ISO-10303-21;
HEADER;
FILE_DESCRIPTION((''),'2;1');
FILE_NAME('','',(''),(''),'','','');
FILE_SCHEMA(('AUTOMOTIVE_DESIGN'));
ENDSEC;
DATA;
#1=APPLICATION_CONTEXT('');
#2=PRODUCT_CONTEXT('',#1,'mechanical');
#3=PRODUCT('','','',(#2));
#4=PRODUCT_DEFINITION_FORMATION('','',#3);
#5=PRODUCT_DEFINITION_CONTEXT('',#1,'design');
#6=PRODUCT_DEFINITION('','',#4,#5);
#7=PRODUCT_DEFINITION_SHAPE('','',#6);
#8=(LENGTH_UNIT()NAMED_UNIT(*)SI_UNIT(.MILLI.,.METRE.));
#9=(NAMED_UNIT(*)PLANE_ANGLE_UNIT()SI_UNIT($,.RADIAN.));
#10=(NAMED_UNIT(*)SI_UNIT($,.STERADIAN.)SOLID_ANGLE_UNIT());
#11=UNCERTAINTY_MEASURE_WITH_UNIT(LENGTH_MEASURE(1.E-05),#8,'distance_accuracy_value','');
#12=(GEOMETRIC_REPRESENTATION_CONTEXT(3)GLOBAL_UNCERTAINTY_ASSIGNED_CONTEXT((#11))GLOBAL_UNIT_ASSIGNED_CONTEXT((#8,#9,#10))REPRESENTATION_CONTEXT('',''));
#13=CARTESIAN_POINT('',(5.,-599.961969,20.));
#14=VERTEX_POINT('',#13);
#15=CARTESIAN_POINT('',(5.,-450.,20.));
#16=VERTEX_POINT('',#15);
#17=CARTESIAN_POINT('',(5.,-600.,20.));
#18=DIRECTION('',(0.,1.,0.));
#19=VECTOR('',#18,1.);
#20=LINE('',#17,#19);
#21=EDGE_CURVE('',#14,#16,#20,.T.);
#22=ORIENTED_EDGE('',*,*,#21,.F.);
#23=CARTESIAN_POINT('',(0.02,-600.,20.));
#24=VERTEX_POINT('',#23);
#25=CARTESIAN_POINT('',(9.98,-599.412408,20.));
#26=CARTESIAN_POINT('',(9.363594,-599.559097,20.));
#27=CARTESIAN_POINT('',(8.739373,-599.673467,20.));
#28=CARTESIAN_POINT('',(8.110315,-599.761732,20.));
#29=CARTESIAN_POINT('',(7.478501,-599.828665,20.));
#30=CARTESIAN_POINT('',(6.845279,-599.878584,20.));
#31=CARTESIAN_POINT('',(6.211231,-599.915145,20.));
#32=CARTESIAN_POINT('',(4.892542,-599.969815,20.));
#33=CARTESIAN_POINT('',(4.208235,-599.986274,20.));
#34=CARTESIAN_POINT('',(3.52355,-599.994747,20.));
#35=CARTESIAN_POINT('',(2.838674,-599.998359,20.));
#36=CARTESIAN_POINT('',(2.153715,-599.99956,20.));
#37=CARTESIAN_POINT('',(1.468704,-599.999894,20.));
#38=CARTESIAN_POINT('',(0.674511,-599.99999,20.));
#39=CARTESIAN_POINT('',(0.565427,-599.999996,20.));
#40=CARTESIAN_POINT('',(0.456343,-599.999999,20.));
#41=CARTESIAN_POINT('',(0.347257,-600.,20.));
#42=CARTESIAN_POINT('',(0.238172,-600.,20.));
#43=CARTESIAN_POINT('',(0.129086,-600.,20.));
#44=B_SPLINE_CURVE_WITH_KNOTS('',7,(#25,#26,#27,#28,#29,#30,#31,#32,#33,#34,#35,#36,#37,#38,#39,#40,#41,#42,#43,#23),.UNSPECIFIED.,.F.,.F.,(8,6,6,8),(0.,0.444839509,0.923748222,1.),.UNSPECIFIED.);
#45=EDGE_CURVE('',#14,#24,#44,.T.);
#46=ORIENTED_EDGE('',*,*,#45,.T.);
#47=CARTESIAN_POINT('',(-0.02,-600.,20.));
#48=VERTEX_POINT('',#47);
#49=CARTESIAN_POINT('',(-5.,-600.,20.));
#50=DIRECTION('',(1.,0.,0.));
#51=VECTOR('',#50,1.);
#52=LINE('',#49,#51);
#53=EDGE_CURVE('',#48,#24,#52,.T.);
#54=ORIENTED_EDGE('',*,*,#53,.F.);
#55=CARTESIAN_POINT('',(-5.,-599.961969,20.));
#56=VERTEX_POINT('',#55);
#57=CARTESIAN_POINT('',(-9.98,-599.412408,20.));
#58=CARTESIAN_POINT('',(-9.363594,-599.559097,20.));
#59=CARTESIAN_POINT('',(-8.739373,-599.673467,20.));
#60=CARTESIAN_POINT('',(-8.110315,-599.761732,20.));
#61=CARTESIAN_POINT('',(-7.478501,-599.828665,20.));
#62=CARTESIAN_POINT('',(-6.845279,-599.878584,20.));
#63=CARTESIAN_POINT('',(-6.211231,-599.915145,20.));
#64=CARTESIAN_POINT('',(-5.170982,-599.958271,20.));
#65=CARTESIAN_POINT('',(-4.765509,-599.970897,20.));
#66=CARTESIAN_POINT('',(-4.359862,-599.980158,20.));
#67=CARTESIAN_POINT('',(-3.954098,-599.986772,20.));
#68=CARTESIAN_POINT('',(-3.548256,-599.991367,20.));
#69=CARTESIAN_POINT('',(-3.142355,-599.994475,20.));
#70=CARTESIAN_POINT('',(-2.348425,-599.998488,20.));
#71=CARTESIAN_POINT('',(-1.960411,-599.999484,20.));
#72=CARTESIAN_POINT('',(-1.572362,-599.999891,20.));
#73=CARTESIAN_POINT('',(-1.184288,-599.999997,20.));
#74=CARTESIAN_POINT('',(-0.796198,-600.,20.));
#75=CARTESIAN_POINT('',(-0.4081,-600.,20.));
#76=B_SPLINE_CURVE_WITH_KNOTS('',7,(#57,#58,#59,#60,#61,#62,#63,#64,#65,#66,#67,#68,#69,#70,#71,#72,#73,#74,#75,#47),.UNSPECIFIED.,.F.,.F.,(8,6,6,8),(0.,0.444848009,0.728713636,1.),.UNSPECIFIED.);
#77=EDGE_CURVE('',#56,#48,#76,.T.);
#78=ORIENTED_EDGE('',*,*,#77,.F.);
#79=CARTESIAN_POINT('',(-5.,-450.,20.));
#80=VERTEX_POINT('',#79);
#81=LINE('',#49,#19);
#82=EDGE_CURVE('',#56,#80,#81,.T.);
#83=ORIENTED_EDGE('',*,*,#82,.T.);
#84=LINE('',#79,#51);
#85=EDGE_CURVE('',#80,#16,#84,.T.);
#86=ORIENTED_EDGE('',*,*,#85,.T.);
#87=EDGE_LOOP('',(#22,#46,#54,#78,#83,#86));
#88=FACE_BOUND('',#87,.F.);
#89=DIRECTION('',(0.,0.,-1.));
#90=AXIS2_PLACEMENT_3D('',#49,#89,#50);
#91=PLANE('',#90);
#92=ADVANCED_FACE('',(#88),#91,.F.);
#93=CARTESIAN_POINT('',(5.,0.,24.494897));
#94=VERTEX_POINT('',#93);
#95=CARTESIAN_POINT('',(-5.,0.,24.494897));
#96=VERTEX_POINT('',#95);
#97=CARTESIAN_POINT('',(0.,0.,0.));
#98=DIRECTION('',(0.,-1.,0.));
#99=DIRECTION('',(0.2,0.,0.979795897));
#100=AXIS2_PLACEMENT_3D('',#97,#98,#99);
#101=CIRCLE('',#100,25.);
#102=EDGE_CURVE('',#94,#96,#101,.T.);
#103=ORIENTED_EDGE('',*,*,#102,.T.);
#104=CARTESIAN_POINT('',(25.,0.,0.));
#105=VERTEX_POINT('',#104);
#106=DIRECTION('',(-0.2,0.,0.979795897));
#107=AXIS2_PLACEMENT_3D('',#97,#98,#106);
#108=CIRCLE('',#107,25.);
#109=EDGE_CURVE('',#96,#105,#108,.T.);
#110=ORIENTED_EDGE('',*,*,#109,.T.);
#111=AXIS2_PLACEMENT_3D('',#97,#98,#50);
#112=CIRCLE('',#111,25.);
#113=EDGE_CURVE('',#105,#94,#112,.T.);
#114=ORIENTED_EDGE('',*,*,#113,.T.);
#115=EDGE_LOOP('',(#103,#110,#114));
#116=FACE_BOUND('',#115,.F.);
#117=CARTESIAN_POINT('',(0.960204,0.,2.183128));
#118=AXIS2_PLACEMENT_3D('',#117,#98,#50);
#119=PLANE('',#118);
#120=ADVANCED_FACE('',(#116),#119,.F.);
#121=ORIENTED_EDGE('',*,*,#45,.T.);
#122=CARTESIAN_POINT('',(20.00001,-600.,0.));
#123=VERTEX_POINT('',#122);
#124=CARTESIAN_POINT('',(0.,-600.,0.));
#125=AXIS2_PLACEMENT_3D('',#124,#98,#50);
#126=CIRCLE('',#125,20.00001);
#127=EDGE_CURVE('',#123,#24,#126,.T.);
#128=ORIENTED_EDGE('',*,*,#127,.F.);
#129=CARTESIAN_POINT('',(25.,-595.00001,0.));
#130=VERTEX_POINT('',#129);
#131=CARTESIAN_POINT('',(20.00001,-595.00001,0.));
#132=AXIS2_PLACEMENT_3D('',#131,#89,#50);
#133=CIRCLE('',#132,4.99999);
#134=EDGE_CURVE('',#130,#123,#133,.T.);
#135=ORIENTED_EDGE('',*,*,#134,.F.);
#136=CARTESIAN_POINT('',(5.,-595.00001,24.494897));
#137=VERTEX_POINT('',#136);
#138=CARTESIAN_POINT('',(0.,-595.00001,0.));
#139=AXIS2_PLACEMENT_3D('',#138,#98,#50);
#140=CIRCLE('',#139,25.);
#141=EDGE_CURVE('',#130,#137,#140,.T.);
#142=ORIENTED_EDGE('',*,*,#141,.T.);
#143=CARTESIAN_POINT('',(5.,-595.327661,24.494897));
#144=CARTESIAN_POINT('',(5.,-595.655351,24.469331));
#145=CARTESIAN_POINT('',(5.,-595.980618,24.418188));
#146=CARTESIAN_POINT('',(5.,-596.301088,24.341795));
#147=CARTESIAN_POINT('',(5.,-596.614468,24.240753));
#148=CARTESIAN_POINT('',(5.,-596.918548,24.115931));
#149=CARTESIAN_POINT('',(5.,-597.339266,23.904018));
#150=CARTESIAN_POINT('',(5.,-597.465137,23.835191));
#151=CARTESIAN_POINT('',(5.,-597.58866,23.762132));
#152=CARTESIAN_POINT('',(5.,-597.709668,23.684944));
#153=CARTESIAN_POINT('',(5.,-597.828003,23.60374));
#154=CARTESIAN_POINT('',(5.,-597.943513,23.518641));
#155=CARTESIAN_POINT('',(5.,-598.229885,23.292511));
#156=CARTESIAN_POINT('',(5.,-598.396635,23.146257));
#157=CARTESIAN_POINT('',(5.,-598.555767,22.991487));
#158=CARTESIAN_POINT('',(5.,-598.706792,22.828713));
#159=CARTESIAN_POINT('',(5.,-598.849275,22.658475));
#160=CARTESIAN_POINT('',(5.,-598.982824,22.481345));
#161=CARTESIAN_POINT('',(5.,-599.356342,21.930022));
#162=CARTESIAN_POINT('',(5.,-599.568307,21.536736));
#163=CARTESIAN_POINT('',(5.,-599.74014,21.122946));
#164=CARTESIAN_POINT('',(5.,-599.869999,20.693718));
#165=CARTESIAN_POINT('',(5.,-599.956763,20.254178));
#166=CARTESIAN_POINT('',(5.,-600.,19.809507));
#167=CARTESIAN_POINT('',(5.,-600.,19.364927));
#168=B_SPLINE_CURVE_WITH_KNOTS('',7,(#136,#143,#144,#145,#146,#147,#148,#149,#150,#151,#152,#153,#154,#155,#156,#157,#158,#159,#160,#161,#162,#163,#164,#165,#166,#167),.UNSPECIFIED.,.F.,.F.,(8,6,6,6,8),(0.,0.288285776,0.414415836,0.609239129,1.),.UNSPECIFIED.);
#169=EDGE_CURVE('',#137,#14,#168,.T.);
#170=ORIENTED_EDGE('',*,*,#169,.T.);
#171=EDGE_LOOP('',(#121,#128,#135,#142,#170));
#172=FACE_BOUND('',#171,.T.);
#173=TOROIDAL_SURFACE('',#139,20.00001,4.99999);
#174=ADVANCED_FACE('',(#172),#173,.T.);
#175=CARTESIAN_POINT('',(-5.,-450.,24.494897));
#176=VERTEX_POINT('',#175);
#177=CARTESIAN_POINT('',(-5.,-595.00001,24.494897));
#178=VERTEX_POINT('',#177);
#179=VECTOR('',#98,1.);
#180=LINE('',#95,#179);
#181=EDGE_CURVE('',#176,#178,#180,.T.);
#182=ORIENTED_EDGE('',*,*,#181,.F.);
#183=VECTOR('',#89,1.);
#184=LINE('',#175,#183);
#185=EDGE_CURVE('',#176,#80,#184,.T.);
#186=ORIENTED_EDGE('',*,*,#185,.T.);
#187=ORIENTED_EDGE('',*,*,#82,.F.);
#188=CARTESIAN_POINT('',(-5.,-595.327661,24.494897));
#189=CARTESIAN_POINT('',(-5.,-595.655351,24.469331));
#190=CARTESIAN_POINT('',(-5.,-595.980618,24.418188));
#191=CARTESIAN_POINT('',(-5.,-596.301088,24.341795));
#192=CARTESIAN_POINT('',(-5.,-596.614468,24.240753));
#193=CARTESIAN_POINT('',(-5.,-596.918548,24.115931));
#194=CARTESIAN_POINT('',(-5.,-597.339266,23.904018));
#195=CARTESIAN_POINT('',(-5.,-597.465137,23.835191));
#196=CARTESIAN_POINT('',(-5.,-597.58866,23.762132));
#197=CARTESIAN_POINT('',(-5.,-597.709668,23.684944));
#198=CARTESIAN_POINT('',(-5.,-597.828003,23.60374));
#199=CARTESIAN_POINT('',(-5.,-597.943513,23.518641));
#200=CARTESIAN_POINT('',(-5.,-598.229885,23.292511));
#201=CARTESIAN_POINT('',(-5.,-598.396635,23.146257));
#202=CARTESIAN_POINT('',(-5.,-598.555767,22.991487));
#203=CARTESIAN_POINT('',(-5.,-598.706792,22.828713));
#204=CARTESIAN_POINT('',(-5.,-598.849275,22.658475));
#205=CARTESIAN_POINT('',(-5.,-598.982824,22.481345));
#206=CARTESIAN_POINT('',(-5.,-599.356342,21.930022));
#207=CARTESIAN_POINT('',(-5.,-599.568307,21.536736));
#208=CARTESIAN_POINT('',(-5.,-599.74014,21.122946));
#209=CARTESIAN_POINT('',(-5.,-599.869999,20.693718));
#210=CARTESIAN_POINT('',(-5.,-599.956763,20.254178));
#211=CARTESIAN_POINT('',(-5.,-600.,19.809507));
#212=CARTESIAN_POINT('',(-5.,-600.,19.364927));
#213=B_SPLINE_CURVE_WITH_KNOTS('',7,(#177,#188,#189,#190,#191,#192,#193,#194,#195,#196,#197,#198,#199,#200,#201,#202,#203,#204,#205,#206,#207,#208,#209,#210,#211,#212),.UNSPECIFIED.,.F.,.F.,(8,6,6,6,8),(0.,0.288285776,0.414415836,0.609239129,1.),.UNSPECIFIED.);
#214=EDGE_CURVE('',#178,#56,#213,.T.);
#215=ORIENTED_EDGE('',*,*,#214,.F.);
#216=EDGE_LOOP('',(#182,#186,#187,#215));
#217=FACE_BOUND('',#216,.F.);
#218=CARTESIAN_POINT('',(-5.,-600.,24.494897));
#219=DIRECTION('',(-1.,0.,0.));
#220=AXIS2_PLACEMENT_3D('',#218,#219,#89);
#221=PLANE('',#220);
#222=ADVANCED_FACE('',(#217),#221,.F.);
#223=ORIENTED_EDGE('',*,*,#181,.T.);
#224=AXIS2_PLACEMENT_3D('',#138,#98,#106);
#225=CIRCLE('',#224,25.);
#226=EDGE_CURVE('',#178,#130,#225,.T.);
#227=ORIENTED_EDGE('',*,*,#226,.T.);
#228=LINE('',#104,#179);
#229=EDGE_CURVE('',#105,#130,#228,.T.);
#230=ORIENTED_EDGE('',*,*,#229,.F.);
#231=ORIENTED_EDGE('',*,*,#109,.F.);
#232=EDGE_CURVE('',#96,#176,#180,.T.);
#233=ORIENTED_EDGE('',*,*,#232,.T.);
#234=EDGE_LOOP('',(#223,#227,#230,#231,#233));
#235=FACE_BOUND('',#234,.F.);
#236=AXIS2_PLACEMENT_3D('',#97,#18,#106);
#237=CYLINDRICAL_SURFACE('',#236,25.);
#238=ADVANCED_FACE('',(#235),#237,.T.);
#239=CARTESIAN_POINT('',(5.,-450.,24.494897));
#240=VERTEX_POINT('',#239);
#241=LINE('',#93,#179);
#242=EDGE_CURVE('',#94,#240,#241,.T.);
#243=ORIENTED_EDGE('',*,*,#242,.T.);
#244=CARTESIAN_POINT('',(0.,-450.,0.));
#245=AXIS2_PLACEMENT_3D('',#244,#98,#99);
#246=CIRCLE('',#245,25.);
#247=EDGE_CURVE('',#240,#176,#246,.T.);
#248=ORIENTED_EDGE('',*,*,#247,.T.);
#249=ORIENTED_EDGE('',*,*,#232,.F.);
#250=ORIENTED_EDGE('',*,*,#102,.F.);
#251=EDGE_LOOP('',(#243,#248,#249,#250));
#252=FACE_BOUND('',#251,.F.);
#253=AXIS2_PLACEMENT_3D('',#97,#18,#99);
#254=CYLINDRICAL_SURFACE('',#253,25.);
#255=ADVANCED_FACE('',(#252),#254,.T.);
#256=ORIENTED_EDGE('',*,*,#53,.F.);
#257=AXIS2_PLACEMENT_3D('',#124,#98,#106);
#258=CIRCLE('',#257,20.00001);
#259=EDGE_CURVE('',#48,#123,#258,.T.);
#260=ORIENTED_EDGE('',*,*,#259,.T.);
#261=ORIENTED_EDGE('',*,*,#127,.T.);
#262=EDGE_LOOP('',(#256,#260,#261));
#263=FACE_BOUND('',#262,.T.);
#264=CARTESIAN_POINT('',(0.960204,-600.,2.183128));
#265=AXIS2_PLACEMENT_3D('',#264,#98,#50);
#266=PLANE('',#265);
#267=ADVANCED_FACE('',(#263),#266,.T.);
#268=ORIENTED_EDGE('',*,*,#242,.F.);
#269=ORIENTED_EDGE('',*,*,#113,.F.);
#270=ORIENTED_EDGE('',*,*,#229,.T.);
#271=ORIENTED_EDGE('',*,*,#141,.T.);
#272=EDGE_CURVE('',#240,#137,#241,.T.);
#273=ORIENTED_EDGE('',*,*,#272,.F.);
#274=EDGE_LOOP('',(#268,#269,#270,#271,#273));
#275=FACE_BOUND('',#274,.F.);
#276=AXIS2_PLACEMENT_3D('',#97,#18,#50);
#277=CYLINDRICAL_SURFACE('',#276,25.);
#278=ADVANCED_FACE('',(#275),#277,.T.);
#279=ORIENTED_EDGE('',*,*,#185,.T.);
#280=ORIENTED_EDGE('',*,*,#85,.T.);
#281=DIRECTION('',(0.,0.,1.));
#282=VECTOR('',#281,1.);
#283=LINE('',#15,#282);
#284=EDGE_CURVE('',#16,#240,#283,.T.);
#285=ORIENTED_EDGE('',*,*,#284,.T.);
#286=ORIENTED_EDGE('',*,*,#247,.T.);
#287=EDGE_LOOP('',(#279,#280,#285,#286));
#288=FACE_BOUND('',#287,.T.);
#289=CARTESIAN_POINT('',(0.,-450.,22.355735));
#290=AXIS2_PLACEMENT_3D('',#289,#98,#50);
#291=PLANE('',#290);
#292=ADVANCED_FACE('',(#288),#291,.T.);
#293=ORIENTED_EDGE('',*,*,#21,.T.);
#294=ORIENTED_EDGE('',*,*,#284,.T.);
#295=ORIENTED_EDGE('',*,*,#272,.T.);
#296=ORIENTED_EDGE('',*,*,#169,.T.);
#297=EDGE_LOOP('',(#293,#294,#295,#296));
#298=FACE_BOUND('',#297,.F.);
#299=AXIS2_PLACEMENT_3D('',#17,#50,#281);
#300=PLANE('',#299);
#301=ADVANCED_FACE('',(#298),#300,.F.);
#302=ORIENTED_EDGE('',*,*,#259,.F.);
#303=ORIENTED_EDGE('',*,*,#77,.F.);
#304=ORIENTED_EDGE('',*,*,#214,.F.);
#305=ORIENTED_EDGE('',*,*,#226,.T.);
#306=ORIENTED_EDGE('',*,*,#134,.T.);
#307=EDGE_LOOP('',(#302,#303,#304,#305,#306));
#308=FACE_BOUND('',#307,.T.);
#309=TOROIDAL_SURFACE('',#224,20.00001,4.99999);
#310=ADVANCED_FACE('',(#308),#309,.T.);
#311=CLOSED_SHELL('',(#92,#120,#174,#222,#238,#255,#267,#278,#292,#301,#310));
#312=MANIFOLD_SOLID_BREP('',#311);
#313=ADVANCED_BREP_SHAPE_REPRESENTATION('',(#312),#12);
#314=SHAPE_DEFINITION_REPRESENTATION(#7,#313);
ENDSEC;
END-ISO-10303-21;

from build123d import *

# Parameters (mm, degrees)
F1_DEPTH = 600
F3_DEPTH = 150
F4_R     = 4.99999


# Not quite as in the source:
# - a fillet or chamfer is up to 0.001 mm smaller than in the source, because OpenCascade refuses the exact size


with BuildPart() as f1:
    # F0 (on Front) → F1 (new body)
    with BuildSketch(Plane.XZ):
        with BuildLine():
            ThreePointArc((-5, 24.4948974278), (-15.8113883008, -19.364916731), (25, 0))
            ThreePointArc((25, 0), (19.364916731, 15.8113883008), (5, 24.4948974278))
            Line((5, 24.4948974278), (5, 20))
            Line((5, 20), (0, 20))
            Line((0, 20), (-5, 20))
            Line((-5, 20), (-5, 24.4948974278))
        make_face()
        with BuildLine():
            Line((5, 20), (5, 24.4948974278))
            ThreePointArc((5, 24.4948974278), (0, 25), (-5, 24.4948974278))
            Line((-5, 24.4948974278), (-5, 20))
            Line((-5, 20), (0, 20))
            Line((0, 20), (5, 20))
        make_face()
    extrude(amount=F1_DEPTH)

    # F2 (on face) → F3 (cut)
    with BuildSketch(Plane.XZ.offset(600)):
        with BuildLine():
            Line((-5, 20), (0, 20))
            Line((0, 20), (5, 20))
            Line((5, 20), (5, 24.4948974278))
            ThreePointArc((5, 24.4948974278), (0, 25), (-5, 24.4948974278))
            Line((-5, 24.4948974278), (-5, 20))
        make_face()
    extrude(amount=-F3_DEPTH, mode=Mode.SUBTRACT)

    # F4 (radius 5 in the source; OpenCascade refuses exactly that, so slightly less here)
    f4_edges = [f1.edges().sort_by_distance(p)[0] for p in [
        (-15.811388, -600, -19.364917),
    ]]
    fillet(f4_edges, radius=F4_R)


solid = f1.part
